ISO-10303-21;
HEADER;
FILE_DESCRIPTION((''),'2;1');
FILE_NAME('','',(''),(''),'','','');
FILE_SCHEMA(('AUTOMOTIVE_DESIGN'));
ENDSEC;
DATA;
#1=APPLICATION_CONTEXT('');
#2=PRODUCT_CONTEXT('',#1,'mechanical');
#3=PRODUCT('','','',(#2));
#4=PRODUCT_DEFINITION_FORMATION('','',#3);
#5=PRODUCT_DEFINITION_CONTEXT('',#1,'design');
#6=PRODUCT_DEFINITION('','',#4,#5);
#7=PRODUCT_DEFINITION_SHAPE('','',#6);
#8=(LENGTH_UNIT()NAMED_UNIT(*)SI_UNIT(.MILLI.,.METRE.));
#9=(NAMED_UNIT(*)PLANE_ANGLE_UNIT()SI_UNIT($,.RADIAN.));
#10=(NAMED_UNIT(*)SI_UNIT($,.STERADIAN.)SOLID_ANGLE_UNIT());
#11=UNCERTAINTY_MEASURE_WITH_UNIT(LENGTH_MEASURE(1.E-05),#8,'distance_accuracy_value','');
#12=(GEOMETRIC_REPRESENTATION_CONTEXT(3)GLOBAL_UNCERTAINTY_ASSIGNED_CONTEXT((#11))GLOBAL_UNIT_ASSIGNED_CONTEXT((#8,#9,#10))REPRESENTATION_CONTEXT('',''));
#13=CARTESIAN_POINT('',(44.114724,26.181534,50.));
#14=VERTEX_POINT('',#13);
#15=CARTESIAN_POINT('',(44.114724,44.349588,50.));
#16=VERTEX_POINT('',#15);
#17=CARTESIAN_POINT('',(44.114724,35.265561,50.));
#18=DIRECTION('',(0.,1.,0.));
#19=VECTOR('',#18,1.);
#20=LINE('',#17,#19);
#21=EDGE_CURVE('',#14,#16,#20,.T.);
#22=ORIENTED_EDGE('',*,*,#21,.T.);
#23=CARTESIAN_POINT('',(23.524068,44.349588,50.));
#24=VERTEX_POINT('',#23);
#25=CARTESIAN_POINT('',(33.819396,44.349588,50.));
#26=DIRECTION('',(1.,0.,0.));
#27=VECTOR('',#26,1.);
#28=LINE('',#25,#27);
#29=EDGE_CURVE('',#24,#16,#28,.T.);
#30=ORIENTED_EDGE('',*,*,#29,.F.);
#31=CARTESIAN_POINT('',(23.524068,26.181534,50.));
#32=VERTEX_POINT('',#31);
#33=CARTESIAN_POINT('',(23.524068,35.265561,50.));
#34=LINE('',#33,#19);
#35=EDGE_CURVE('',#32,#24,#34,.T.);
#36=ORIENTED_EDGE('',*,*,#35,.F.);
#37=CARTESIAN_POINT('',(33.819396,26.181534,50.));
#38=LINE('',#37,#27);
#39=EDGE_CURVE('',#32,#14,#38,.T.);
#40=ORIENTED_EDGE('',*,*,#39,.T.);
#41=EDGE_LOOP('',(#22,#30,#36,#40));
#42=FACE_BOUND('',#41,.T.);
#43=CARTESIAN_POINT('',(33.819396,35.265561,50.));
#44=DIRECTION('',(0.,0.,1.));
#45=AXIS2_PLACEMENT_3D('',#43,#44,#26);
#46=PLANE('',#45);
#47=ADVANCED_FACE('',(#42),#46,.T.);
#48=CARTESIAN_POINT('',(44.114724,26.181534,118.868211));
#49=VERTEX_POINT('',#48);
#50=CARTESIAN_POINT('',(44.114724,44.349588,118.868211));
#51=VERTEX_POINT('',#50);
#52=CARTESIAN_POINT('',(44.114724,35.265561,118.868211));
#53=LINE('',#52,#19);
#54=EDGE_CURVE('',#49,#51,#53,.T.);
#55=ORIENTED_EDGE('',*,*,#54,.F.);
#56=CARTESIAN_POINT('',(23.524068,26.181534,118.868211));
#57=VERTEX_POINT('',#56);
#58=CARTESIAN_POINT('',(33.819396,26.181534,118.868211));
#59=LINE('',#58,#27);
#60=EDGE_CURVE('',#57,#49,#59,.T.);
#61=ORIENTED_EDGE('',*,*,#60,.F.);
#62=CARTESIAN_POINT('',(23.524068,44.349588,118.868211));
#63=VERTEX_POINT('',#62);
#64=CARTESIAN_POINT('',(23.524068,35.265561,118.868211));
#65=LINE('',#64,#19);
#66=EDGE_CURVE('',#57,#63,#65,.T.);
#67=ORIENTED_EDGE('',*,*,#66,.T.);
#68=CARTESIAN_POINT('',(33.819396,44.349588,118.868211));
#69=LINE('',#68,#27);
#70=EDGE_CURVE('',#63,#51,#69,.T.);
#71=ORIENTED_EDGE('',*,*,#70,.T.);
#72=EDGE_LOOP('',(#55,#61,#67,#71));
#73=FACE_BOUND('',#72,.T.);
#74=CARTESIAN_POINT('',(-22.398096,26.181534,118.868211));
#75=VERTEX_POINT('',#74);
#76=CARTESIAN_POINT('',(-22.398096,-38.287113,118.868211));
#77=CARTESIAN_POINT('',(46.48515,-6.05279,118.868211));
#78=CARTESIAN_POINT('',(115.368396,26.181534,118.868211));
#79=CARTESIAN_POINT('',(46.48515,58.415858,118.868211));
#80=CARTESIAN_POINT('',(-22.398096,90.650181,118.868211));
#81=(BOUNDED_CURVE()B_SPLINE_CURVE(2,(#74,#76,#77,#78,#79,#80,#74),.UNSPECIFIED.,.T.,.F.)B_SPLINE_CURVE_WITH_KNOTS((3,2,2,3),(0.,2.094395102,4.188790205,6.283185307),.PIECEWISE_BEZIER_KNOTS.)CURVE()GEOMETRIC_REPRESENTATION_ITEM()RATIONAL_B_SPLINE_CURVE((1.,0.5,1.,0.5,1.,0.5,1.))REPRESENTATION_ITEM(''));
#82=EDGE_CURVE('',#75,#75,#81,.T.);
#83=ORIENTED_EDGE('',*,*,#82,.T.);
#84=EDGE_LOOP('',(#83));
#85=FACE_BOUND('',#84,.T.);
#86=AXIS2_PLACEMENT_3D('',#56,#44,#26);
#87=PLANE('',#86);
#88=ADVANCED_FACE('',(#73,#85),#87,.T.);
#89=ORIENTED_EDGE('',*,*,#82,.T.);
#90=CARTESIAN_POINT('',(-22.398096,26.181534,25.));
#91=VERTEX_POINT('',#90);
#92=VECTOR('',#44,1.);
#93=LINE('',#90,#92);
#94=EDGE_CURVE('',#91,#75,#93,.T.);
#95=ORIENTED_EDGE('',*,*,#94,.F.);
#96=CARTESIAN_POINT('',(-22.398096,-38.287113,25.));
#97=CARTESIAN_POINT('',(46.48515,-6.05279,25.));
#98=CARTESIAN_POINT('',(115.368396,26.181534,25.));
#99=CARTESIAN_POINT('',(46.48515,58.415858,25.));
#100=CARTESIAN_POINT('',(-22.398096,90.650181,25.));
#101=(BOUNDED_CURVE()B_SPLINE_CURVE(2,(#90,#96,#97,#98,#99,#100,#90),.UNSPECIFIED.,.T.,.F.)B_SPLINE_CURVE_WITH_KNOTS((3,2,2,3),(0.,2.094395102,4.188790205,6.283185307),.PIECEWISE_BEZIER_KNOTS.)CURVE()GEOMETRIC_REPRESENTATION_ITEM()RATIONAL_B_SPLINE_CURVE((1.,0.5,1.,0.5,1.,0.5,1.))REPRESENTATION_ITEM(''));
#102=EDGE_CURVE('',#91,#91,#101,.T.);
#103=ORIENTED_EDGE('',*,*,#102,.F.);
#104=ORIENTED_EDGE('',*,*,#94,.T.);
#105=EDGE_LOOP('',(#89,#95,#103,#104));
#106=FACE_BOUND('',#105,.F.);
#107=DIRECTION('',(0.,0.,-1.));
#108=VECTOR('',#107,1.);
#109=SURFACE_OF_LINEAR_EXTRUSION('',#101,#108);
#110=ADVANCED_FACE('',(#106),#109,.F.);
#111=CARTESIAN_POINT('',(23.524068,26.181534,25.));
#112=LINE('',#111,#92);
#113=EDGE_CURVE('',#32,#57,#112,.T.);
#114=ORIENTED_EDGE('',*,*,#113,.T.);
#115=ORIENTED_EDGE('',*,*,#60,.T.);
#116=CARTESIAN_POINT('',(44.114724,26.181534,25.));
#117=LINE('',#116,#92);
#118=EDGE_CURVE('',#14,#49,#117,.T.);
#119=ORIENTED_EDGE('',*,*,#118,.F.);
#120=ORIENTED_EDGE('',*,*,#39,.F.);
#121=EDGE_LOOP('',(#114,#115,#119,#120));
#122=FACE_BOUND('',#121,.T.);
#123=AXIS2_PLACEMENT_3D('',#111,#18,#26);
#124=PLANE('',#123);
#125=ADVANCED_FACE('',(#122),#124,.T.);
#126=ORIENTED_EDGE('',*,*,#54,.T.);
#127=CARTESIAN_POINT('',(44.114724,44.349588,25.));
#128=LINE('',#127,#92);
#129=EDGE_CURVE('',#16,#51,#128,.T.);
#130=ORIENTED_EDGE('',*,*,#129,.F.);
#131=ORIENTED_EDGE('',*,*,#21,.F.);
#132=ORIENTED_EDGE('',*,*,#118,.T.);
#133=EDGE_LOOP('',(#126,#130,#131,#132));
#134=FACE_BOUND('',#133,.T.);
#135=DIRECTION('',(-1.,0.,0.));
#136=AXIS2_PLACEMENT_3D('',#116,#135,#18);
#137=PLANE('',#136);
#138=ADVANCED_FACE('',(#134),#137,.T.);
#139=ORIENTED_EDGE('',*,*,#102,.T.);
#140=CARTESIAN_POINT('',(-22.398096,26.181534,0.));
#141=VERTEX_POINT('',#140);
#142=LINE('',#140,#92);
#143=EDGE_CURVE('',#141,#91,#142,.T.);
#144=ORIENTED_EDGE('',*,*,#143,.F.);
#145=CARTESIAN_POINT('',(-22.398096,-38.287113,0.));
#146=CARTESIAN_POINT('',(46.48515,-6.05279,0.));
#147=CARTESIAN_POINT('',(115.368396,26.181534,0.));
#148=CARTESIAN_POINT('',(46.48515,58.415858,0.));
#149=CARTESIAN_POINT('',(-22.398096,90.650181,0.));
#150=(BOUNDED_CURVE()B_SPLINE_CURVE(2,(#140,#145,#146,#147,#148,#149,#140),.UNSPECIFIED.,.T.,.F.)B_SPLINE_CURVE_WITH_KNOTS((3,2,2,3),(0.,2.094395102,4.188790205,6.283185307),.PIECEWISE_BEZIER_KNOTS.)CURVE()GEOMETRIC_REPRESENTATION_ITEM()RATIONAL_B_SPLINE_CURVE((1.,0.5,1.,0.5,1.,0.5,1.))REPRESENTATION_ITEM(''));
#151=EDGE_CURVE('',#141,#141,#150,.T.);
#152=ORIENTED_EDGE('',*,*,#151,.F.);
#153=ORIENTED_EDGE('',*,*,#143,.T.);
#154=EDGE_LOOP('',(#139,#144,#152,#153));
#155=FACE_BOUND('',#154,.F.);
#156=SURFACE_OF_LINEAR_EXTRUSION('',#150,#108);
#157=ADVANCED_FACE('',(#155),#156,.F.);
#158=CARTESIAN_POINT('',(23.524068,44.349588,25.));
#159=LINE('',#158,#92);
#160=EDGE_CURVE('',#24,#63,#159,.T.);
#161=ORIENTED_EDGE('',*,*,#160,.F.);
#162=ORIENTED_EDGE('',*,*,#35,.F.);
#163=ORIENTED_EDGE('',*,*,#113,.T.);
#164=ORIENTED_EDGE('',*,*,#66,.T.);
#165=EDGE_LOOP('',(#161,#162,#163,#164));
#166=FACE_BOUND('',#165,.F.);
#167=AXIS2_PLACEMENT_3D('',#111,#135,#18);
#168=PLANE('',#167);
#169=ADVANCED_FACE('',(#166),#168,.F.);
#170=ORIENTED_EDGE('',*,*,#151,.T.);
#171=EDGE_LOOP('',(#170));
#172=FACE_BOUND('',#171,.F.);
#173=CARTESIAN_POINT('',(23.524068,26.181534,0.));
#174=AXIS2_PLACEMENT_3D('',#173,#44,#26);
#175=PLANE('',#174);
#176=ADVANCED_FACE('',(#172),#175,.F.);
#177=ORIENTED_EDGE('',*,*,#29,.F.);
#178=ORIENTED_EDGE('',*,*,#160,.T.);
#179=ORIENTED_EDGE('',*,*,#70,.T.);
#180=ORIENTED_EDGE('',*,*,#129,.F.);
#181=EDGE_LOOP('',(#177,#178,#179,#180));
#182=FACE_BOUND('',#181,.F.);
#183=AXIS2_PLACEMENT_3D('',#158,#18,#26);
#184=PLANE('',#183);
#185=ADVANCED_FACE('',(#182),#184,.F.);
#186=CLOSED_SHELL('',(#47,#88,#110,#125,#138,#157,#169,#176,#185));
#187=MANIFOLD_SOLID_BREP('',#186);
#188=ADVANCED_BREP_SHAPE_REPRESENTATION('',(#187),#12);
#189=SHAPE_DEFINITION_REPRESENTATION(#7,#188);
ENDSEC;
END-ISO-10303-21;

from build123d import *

# Parameters (mm, degrees)
F1_DEPTH = 25
F2_W     = 20.5906555057
F2_H     = 18.1680545211
F3_DEPTH = 25
F6_DEPTH = 93.8682109118


# Not quite as in the source:
# - the program builds the solid bodies; features that only make, move or delete a surface that nothing else refers to are left out


with BuildPart() as f1:
    # F0 (on Top) → F1 (new body)
    with BuildSketch(Plane.XY):
        with BuildLine():
            add(Edge.make_bspline(
                [(-22.398095578, 26.1815339327), (-22.398095578, -38.287113302), (46.4851502329, -6.0527896847), (115.3683960438, 26.1815339327), (46.4851502329, 58.41585755), (-22.398095578, 90.6501811674), (-22.398095578, 26.1815339327)],
                knots=[0, 0, 0, 2.0943951024, 2.0943951024, 4.1887902048, 4.1887902048, 6.2831853072, 6.2831853072, 6.2831853072], degree=2, weights=[1, 0.5, 1, 0.5, 1, 0.5, 1]))
        make_face()
    extrude(amount=F1_DEPTH)

    # F2 (on face) → F3 (join)
    with BuildSketch(Plane.XY.offset(25)):
        with Locations((33.8193960488, 35.2655611932)):
            Rectangle(F2_W, F2_H)
    extrude(amount=F3_DEPTH)

    # F6 (add): a face of the model
    f6_faces = [f1.faces().sort_by_distance(p)[0] for p in [
        (22.6964116523, 25.5040831256, 25),
    ]]
    extrude(f6_faces, amount=F6_DEPTH)


solid = f1.part
